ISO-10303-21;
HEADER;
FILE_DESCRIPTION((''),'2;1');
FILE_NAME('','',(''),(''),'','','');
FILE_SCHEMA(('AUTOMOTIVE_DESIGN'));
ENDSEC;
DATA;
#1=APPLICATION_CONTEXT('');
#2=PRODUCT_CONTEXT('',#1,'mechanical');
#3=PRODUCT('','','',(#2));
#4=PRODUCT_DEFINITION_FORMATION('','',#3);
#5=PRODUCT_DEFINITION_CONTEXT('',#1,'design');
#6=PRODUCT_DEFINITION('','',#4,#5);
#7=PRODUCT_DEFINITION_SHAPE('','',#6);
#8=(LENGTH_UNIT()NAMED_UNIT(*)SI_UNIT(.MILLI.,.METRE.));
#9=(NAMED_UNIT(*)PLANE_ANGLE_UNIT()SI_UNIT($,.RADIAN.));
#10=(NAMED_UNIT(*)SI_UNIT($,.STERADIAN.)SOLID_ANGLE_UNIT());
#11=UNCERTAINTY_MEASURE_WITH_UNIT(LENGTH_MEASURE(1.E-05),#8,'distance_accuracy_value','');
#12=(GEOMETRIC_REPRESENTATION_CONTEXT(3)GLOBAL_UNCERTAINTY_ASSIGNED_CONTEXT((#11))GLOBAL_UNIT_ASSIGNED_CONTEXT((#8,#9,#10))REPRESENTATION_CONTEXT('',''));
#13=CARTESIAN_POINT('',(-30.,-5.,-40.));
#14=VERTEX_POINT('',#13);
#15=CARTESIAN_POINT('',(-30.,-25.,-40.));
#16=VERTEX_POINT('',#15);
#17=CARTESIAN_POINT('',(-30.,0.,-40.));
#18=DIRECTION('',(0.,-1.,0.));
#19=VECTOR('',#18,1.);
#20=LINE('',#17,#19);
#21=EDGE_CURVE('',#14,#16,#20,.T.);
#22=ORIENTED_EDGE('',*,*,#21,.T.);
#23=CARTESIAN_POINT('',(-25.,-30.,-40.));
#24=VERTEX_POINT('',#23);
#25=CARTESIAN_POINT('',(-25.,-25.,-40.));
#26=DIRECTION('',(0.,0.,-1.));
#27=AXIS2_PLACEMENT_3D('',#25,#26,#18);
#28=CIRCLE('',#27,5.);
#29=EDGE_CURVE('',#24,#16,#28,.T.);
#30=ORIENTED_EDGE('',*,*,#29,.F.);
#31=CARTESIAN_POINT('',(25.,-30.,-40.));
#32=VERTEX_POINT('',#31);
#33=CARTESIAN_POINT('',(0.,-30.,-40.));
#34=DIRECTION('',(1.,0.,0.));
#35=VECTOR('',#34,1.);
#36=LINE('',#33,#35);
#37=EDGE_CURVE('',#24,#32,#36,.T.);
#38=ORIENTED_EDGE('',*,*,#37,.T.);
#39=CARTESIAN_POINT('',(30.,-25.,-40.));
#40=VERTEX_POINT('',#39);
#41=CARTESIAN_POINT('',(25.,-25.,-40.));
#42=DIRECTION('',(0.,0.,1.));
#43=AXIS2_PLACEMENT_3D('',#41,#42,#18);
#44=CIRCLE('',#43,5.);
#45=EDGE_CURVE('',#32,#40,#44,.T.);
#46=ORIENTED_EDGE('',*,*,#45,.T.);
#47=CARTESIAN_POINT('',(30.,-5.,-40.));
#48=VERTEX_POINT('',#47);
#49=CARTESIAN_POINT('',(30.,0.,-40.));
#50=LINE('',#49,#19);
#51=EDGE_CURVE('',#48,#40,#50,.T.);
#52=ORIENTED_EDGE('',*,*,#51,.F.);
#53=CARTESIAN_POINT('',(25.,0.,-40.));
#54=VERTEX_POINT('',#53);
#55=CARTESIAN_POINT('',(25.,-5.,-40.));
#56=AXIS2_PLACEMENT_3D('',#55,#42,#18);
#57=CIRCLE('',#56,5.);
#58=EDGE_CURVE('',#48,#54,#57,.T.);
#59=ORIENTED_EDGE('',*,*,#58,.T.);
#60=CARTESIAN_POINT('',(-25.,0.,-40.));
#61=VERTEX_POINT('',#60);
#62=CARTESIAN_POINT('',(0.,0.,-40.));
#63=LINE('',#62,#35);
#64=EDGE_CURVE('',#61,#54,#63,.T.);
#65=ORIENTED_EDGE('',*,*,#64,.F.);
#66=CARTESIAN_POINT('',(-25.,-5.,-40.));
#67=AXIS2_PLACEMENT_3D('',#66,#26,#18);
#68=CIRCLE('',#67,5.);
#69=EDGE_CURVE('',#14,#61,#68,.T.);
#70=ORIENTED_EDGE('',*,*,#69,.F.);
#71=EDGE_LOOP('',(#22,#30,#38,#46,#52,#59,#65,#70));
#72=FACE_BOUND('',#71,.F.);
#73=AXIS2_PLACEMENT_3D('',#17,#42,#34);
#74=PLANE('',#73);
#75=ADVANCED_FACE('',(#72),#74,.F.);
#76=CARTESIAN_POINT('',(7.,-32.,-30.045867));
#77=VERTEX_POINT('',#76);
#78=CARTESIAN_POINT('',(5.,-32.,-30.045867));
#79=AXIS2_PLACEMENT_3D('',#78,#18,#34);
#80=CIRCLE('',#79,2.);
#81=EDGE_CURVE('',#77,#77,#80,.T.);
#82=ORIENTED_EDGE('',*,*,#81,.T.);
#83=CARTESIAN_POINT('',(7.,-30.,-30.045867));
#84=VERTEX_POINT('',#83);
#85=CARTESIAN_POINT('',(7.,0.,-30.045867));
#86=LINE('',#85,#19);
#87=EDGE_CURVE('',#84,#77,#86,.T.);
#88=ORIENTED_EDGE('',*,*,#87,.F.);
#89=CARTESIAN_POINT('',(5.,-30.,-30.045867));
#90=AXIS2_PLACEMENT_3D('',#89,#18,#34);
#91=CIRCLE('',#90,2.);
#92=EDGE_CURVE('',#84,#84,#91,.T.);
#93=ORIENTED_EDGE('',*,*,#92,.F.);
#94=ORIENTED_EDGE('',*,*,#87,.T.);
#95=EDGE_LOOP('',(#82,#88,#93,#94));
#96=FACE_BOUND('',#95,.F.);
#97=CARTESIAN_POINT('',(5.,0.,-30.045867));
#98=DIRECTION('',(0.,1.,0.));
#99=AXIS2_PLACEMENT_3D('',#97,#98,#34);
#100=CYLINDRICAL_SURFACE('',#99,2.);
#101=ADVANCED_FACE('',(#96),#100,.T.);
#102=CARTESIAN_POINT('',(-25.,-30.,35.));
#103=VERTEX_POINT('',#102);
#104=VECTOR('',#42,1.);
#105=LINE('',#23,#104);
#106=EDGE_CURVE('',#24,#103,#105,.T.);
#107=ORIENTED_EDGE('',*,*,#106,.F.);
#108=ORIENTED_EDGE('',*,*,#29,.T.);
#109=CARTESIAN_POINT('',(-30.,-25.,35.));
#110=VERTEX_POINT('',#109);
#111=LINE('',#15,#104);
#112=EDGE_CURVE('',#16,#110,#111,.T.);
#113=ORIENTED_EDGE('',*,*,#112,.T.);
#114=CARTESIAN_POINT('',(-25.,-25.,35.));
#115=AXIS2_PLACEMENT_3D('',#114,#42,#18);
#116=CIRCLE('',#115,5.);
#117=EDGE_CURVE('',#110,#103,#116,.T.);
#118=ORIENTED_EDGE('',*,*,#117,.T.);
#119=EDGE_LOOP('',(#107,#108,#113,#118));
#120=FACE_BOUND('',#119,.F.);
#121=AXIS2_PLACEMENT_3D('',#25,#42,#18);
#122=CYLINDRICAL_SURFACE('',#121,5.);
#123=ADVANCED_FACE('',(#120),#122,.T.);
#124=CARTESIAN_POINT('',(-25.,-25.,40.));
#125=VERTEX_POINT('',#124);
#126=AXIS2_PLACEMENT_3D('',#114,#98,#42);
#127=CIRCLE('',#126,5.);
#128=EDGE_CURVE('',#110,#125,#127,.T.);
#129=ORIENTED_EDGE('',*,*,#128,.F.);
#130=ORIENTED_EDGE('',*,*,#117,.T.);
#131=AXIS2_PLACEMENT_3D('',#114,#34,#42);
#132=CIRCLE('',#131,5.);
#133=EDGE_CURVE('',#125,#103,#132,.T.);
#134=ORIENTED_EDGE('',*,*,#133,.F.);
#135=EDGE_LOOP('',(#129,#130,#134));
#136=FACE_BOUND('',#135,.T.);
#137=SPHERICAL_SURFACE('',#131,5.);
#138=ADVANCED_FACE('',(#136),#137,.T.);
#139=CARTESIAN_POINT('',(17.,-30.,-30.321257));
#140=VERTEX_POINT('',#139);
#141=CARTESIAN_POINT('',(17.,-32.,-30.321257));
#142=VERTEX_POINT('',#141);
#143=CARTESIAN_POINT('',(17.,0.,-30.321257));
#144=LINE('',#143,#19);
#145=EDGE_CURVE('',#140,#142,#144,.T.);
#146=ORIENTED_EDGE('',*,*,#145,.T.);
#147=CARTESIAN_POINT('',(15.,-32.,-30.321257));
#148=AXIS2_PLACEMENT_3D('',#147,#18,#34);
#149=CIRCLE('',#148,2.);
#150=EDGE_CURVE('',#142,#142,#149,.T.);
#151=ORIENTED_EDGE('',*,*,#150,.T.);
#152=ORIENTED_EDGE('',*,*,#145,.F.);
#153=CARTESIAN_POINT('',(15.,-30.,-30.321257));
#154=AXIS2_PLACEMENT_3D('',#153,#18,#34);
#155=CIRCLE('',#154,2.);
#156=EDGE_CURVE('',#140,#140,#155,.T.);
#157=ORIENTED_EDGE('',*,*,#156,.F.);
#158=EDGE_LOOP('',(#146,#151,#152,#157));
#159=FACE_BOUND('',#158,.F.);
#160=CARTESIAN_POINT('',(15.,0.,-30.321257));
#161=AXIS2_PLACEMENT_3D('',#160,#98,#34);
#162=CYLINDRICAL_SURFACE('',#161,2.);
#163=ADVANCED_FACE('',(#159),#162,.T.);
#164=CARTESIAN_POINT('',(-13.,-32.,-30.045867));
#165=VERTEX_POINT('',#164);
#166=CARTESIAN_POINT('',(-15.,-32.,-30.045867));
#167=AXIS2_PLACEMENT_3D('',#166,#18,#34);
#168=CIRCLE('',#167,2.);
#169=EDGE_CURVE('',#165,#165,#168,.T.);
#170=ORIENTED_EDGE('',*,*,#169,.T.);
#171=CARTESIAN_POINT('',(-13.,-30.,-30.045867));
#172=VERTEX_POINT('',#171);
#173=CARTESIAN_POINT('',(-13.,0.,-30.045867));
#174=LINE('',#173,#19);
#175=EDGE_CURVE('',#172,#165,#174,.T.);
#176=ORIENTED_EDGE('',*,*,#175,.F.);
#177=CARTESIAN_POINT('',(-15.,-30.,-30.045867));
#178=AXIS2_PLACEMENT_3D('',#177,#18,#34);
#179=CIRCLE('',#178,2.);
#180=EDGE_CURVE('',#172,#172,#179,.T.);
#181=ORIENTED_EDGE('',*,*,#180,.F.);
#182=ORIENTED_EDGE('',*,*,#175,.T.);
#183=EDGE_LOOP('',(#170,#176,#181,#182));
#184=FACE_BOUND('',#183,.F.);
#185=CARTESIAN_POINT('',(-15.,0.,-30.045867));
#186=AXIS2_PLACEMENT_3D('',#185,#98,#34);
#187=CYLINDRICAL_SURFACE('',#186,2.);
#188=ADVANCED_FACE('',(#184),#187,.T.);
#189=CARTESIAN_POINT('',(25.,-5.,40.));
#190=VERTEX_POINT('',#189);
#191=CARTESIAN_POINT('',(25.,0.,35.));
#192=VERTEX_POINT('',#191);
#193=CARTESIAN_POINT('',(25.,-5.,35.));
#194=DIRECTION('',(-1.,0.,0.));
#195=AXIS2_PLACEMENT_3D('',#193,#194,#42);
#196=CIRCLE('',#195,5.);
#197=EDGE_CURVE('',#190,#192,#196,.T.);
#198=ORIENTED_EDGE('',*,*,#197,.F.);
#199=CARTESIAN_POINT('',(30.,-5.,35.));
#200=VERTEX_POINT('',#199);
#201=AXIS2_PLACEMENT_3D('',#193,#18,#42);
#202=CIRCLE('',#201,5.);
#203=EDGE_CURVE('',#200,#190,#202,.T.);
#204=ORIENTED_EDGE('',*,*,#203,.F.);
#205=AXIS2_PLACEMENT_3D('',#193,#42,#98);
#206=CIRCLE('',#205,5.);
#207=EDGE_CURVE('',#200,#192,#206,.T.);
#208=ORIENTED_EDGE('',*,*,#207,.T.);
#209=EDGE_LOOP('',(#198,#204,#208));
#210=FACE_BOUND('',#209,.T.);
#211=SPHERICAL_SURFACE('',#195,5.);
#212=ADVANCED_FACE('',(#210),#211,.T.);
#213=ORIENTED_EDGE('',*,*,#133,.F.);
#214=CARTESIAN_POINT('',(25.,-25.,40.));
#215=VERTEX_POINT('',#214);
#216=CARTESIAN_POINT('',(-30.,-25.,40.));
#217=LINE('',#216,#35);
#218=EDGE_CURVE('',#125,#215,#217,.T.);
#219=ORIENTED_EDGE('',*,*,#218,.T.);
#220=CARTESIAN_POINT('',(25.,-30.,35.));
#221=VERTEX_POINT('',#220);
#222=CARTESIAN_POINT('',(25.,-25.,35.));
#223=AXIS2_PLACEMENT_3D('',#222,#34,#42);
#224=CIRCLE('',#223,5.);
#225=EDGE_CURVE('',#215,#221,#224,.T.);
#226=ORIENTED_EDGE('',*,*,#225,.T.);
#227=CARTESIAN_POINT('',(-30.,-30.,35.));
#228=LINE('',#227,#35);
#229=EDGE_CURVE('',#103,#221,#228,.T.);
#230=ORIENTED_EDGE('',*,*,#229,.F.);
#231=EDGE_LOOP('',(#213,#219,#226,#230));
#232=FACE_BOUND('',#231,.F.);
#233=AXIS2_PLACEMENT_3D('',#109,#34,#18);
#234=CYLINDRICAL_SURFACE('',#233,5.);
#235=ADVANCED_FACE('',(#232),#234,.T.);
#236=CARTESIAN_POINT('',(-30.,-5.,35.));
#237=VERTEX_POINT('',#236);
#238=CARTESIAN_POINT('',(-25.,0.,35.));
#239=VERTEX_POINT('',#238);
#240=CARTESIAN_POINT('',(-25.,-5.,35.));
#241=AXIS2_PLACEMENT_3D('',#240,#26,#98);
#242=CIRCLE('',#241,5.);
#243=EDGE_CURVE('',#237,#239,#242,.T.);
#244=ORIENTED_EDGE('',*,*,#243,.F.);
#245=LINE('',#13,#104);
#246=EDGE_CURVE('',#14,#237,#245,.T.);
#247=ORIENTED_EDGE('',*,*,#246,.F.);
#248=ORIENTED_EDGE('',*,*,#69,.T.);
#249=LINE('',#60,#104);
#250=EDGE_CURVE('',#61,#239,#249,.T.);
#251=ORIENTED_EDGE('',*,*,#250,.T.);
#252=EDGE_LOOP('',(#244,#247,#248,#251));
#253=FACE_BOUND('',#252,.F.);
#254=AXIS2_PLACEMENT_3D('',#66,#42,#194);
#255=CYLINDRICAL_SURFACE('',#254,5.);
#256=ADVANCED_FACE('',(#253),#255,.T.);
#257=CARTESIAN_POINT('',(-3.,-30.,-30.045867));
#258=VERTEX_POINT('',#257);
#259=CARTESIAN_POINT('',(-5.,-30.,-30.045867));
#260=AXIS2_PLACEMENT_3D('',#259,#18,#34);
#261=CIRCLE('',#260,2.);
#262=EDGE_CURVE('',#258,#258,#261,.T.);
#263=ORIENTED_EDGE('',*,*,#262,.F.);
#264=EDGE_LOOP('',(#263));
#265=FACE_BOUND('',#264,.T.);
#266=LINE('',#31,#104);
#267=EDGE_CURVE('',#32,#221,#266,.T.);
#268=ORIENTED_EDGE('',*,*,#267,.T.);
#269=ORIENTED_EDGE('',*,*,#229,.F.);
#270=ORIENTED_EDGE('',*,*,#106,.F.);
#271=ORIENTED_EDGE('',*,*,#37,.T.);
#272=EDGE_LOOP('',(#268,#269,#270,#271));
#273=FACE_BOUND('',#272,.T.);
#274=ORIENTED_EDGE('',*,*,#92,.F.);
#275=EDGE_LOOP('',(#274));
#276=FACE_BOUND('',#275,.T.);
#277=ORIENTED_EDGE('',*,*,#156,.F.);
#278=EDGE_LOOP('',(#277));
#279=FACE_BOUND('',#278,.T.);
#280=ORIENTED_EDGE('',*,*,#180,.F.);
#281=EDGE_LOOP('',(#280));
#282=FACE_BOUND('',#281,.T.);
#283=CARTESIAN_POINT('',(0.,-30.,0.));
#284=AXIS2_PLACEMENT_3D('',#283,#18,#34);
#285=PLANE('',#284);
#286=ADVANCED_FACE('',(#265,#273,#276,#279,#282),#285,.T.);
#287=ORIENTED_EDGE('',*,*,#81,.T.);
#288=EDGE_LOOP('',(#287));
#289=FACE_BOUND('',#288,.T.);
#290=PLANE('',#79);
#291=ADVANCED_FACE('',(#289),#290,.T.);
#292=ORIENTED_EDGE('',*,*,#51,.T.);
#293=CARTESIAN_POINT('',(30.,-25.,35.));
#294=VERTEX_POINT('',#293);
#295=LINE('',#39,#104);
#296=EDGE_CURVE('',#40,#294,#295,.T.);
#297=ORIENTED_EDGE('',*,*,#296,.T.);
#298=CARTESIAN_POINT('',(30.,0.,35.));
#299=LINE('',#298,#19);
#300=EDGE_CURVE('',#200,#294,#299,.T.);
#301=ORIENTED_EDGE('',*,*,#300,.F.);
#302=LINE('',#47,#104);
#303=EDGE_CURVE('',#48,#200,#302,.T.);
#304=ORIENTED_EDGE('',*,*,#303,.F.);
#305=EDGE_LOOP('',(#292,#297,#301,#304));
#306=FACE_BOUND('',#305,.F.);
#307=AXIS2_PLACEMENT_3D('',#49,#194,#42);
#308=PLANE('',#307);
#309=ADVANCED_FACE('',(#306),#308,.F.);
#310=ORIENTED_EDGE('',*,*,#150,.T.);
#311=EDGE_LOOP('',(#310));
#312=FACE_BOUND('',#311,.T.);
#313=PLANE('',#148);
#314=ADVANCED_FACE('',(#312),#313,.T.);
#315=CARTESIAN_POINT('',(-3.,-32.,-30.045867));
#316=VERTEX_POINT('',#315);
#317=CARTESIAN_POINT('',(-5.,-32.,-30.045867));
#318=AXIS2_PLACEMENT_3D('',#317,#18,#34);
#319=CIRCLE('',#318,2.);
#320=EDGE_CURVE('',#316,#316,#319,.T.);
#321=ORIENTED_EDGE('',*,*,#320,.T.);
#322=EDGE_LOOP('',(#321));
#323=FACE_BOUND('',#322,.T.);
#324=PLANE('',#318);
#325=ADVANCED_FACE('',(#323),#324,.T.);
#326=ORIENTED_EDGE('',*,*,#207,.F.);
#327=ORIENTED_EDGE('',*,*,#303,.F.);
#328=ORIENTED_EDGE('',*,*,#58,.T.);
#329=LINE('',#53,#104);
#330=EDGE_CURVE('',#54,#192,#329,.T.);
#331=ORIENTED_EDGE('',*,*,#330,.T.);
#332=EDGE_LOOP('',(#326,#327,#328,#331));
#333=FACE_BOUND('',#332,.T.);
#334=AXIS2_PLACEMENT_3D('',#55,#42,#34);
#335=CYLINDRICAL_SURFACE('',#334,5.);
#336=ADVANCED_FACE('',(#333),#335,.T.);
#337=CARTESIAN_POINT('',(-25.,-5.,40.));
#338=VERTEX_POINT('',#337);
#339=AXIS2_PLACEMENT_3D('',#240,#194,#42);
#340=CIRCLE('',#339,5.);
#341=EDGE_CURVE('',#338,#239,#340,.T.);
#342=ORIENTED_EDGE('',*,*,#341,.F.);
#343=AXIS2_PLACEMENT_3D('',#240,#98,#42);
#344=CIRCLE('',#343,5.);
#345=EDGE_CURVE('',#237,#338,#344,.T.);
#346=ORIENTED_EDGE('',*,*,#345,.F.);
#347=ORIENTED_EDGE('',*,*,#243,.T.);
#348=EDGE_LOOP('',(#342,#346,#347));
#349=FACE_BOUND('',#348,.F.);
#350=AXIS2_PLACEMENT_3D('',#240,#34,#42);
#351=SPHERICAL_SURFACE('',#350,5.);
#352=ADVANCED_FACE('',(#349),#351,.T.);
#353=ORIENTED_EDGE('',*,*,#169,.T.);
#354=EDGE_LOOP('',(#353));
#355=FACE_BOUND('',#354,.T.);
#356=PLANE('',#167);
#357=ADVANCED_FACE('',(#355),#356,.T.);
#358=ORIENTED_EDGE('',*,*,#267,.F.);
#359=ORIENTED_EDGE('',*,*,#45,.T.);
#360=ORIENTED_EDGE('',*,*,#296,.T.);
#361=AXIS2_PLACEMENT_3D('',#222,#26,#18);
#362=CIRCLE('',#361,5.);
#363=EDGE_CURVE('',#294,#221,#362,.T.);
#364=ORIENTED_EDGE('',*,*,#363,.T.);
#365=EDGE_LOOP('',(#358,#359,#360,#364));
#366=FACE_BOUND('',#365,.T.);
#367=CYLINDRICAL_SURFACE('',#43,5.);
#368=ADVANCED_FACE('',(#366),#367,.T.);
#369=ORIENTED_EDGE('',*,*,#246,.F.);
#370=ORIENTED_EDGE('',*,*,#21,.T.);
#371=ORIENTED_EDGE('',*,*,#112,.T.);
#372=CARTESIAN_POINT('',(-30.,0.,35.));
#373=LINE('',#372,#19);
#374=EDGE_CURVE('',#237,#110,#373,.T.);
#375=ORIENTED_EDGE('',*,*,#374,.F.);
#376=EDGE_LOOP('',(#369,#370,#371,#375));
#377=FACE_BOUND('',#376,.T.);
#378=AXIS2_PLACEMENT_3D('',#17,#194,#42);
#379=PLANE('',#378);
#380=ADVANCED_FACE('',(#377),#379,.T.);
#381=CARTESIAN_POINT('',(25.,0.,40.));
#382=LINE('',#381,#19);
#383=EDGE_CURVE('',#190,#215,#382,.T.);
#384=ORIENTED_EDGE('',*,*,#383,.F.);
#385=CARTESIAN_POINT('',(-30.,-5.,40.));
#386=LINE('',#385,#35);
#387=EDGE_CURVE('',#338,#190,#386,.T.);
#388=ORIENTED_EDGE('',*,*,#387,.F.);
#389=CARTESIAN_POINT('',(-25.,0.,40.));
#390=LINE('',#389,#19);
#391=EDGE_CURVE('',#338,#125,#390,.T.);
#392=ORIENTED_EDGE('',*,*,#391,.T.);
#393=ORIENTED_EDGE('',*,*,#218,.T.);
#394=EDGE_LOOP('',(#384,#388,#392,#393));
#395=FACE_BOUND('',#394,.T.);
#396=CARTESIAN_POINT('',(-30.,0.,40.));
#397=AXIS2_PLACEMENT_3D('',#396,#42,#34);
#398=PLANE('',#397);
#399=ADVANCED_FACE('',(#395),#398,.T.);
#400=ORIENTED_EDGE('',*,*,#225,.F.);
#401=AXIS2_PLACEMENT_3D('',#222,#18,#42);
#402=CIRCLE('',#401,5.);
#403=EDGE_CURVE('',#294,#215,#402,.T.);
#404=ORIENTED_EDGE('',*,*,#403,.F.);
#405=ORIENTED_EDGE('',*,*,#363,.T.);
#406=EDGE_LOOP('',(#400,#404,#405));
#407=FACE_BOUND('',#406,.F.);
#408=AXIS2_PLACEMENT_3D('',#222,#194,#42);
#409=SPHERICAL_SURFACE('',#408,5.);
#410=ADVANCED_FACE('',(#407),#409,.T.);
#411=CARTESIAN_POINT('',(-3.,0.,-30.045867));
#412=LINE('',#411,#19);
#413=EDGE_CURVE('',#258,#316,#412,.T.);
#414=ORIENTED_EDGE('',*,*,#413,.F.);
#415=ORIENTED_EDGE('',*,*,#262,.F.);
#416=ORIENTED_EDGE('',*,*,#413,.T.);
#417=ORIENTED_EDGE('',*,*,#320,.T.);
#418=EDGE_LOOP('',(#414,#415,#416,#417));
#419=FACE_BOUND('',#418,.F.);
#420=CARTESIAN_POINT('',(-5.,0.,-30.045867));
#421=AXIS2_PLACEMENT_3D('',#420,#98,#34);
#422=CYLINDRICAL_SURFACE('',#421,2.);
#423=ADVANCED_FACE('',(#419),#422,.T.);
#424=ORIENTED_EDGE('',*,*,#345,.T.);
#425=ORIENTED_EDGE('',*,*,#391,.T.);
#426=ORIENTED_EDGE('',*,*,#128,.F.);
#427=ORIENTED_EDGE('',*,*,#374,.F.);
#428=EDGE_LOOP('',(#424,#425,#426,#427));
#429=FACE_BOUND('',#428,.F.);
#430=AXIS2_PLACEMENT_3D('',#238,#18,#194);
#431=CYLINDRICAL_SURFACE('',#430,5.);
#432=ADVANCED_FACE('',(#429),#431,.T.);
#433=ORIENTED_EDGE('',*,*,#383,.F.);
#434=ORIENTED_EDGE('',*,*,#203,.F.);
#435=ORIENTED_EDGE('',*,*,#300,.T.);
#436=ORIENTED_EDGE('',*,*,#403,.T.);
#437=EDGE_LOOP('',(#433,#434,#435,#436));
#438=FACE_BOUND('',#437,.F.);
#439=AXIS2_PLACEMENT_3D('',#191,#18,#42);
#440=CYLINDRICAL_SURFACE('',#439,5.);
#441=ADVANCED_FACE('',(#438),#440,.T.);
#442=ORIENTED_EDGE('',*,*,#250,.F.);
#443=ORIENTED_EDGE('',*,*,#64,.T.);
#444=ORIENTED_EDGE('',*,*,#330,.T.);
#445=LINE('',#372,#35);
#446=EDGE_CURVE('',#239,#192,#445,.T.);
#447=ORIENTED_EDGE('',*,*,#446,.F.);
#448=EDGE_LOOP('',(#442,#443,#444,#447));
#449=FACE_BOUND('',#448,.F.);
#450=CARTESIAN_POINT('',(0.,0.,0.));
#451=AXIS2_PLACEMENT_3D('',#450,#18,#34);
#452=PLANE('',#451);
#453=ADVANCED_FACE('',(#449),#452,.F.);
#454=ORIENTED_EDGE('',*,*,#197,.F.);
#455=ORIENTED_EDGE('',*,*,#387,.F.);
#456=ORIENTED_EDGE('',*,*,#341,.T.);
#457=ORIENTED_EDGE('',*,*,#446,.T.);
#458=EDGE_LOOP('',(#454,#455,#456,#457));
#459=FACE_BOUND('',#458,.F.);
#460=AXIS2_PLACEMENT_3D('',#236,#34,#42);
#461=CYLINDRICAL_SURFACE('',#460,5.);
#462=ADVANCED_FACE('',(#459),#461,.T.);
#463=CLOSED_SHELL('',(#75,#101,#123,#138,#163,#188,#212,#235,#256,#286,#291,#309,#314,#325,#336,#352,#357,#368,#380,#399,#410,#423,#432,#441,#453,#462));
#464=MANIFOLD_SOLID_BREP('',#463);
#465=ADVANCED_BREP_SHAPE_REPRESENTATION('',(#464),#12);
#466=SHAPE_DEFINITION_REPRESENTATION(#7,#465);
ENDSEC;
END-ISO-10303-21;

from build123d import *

# Parameters (mm, degrees)
F0_W     = 60
F0_H     = 80
F0_R     = 2
F1_DEPTH = 30
F2_DEPTH = 32
F3_R     = 5


# Not quite as in the source:
# - a feature names something its author has since deleted; it is built from what else it names


with BuildPart() as f1:
    # F0 (on Front) → F1 (new body)
    with BuildSketch(Plane.XZ):
        Rectangle(F0_W, F0_H)
        with Locations((-15, -30.0458669662)):
            Circle(F0_R, mode=Mode.SUBTRACT)
        with Locations((-5, -30.0458669662)):
            Circle(F0_R, mode=Mode.SUBTRACT)
        with Locations((5, -30.0458669662)):
            Circle(F0_R, mode=Mode.SUBTRACT)
        with Locations((15, -30.3212571889)):
            Circle(F0_R, mode=Mode.SUBTRACT)
    extrude(amount=F1_DEPTH)

    # F0 (on Front) → F2 (join)
    with BuildSketch(Plane.XZ):
        with Locations((-15, -30.0458669662)):
            Circle(F0_R)
        with Locations((15, -30.3212571889)):
            Circle(F0_R)
        with Locations((-5, -30.0458669662)):
            Circle(F0_R)
        with Locations((5, -30.0458669662)):
            Circle(F0_R)
    extrude(amount=F2_DEPTH)

    # F3
    f3_edges = [f1.edges().sort_by_distance(p)[0] for p in [
        (0, -30, 40),
        (0, 0, 40),
        (30, -15, 40),
        (-30, -15, 40),
        (-30, -30, 0),
        (30, -30, 0),
        (-30, 0, 0),
        (30, 0, 0),
    ]]
    fillet(f3_edges, radius=F3_R)


solid = f1.part
